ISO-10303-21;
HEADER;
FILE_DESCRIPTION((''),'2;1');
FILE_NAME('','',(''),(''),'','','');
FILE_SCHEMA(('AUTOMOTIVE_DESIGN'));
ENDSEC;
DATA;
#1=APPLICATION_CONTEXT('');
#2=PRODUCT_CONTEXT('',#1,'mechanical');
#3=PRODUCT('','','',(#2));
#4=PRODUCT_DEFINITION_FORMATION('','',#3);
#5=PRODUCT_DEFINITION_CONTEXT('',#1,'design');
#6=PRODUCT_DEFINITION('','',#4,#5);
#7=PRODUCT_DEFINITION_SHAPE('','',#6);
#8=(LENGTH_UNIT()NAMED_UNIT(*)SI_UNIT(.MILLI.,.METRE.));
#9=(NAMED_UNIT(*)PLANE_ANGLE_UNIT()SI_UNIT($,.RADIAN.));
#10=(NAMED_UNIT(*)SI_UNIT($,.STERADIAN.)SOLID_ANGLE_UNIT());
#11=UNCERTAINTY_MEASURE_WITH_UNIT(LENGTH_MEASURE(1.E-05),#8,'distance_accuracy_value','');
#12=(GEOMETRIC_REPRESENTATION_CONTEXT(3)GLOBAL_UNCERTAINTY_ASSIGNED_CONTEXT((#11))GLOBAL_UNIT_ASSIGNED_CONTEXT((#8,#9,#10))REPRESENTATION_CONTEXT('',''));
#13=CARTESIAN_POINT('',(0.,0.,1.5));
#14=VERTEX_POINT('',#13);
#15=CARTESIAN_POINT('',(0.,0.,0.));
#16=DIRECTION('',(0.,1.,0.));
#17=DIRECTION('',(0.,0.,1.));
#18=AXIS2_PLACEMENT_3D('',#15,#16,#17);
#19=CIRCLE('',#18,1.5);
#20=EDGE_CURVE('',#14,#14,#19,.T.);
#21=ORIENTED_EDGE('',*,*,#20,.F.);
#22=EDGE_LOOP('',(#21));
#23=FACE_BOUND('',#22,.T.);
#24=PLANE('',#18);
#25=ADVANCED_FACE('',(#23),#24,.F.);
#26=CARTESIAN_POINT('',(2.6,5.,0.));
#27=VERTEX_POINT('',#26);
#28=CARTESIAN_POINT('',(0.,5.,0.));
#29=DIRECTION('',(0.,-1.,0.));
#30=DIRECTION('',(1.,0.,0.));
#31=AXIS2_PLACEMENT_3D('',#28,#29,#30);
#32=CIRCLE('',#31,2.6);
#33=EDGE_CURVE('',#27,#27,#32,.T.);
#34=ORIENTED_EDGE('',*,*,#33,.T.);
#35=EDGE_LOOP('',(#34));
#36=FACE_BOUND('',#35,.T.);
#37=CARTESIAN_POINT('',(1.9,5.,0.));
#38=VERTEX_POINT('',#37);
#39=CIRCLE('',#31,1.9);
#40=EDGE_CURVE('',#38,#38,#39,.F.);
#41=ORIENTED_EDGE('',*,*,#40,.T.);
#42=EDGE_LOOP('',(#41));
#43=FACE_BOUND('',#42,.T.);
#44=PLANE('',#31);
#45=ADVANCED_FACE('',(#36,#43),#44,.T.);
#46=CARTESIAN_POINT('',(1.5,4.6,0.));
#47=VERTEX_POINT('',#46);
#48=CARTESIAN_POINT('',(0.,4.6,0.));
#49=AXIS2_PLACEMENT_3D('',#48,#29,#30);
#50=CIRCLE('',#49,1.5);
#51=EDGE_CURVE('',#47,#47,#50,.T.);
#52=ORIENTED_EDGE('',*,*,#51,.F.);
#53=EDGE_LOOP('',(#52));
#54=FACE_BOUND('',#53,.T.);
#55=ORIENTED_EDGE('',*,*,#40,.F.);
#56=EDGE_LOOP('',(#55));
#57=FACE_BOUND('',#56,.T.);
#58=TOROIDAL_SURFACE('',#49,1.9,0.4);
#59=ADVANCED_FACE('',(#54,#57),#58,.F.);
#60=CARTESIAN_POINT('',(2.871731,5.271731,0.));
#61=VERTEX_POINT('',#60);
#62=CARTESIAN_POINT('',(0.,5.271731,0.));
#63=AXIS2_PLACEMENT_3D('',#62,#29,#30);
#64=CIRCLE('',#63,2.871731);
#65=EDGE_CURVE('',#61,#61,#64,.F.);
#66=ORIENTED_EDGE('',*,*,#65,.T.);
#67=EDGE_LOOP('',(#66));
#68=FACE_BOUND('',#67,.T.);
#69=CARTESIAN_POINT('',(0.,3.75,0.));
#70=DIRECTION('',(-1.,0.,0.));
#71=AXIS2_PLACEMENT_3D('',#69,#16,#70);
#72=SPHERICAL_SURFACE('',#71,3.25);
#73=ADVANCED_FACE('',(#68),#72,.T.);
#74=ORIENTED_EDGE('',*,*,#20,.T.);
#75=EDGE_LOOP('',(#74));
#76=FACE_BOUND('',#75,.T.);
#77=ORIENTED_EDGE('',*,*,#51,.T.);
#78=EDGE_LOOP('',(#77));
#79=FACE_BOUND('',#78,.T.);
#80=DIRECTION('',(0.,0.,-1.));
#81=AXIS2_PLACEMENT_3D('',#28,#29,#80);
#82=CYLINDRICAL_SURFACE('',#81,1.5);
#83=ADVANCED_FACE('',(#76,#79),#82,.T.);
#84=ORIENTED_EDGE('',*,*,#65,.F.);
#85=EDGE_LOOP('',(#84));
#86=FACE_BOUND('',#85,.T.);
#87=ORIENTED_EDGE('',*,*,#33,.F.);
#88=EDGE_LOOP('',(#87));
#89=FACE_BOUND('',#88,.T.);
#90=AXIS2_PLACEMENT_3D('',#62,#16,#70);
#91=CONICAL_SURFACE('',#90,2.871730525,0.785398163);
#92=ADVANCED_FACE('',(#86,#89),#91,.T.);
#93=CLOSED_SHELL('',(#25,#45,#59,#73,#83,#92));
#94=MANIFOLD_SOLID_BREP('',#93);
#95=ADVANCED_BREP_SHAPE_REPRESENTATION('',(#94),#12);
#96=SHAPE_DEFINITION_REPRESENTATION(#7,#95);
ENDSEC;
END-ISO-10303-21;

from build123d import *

# Parameters (mm, degrees)
SKETCH1_R           = 1.5
BOSS_EXTRUDE1_DEPTH = 5
FILLET2_R           = 0.4
CHAMFER1_SIZE       = 0.4


with BuildPart() as part:
    # Sketch1 → Boss-Extrude1 (new body)
    with BuildSketch(Plane(origin=(0, 0, 0), x_dir=(1, 0, 0), z_dir=(0, 1, 0))):
        with Locations(Location((0, 0, 0), (0, 0, 270))):
            Circle(SKETCH1_R)
    extrude(amount=BOSS_EXTRUDE1_DEPTH)

    # Sketch3 → Revolve1 (revolve)
    with BuildSketch(Plane.XY):
        with BuildLine():
            Line((0, 5), (-3, 5))
            ThreePointArc((-3, 5), (-1.802775638, 6.454163457), (0, 7))
            Line((0, 7), (0, 5))
        make_face()
    revolve(axis=Axis((0, 7, 0), (0, -1, 0)))

    # Fillet2
    fillet2_edges = [part.edges().sort_by_distance(p)[0] for p in [
        (0, 5, -1.5),
    ]]
    fillet(fillet2_edges, radius=FILLET2_R)

    # Chamfer1
    # the kernel refuses this chamfer: 0.4, 0.305882353 mm, written as the material it takes off along each edge
    with BuildSketch(Plane(origin=(0, 5, 0), x_dir=(-1, 0, 0), z_dir=(0, 0, 1))) as chamfer1_piece_1:
        with BuildLine():
            Line((3 - CHAMFER1_SIZE, 0), (2.871730525, -0.271730525))
            ThreePointArc((2.871730525, -0.271730525), (2.93785488, -0.139787287), (3, 0))
            Line((3, 0), (3 - CHAMFER1_SIZE, 0))
        make_face()
    revolve(axis=Axis((0, 5, 0), (0, -1, 0)), mode=Mode.SUBTRACT)


solid = part.part
